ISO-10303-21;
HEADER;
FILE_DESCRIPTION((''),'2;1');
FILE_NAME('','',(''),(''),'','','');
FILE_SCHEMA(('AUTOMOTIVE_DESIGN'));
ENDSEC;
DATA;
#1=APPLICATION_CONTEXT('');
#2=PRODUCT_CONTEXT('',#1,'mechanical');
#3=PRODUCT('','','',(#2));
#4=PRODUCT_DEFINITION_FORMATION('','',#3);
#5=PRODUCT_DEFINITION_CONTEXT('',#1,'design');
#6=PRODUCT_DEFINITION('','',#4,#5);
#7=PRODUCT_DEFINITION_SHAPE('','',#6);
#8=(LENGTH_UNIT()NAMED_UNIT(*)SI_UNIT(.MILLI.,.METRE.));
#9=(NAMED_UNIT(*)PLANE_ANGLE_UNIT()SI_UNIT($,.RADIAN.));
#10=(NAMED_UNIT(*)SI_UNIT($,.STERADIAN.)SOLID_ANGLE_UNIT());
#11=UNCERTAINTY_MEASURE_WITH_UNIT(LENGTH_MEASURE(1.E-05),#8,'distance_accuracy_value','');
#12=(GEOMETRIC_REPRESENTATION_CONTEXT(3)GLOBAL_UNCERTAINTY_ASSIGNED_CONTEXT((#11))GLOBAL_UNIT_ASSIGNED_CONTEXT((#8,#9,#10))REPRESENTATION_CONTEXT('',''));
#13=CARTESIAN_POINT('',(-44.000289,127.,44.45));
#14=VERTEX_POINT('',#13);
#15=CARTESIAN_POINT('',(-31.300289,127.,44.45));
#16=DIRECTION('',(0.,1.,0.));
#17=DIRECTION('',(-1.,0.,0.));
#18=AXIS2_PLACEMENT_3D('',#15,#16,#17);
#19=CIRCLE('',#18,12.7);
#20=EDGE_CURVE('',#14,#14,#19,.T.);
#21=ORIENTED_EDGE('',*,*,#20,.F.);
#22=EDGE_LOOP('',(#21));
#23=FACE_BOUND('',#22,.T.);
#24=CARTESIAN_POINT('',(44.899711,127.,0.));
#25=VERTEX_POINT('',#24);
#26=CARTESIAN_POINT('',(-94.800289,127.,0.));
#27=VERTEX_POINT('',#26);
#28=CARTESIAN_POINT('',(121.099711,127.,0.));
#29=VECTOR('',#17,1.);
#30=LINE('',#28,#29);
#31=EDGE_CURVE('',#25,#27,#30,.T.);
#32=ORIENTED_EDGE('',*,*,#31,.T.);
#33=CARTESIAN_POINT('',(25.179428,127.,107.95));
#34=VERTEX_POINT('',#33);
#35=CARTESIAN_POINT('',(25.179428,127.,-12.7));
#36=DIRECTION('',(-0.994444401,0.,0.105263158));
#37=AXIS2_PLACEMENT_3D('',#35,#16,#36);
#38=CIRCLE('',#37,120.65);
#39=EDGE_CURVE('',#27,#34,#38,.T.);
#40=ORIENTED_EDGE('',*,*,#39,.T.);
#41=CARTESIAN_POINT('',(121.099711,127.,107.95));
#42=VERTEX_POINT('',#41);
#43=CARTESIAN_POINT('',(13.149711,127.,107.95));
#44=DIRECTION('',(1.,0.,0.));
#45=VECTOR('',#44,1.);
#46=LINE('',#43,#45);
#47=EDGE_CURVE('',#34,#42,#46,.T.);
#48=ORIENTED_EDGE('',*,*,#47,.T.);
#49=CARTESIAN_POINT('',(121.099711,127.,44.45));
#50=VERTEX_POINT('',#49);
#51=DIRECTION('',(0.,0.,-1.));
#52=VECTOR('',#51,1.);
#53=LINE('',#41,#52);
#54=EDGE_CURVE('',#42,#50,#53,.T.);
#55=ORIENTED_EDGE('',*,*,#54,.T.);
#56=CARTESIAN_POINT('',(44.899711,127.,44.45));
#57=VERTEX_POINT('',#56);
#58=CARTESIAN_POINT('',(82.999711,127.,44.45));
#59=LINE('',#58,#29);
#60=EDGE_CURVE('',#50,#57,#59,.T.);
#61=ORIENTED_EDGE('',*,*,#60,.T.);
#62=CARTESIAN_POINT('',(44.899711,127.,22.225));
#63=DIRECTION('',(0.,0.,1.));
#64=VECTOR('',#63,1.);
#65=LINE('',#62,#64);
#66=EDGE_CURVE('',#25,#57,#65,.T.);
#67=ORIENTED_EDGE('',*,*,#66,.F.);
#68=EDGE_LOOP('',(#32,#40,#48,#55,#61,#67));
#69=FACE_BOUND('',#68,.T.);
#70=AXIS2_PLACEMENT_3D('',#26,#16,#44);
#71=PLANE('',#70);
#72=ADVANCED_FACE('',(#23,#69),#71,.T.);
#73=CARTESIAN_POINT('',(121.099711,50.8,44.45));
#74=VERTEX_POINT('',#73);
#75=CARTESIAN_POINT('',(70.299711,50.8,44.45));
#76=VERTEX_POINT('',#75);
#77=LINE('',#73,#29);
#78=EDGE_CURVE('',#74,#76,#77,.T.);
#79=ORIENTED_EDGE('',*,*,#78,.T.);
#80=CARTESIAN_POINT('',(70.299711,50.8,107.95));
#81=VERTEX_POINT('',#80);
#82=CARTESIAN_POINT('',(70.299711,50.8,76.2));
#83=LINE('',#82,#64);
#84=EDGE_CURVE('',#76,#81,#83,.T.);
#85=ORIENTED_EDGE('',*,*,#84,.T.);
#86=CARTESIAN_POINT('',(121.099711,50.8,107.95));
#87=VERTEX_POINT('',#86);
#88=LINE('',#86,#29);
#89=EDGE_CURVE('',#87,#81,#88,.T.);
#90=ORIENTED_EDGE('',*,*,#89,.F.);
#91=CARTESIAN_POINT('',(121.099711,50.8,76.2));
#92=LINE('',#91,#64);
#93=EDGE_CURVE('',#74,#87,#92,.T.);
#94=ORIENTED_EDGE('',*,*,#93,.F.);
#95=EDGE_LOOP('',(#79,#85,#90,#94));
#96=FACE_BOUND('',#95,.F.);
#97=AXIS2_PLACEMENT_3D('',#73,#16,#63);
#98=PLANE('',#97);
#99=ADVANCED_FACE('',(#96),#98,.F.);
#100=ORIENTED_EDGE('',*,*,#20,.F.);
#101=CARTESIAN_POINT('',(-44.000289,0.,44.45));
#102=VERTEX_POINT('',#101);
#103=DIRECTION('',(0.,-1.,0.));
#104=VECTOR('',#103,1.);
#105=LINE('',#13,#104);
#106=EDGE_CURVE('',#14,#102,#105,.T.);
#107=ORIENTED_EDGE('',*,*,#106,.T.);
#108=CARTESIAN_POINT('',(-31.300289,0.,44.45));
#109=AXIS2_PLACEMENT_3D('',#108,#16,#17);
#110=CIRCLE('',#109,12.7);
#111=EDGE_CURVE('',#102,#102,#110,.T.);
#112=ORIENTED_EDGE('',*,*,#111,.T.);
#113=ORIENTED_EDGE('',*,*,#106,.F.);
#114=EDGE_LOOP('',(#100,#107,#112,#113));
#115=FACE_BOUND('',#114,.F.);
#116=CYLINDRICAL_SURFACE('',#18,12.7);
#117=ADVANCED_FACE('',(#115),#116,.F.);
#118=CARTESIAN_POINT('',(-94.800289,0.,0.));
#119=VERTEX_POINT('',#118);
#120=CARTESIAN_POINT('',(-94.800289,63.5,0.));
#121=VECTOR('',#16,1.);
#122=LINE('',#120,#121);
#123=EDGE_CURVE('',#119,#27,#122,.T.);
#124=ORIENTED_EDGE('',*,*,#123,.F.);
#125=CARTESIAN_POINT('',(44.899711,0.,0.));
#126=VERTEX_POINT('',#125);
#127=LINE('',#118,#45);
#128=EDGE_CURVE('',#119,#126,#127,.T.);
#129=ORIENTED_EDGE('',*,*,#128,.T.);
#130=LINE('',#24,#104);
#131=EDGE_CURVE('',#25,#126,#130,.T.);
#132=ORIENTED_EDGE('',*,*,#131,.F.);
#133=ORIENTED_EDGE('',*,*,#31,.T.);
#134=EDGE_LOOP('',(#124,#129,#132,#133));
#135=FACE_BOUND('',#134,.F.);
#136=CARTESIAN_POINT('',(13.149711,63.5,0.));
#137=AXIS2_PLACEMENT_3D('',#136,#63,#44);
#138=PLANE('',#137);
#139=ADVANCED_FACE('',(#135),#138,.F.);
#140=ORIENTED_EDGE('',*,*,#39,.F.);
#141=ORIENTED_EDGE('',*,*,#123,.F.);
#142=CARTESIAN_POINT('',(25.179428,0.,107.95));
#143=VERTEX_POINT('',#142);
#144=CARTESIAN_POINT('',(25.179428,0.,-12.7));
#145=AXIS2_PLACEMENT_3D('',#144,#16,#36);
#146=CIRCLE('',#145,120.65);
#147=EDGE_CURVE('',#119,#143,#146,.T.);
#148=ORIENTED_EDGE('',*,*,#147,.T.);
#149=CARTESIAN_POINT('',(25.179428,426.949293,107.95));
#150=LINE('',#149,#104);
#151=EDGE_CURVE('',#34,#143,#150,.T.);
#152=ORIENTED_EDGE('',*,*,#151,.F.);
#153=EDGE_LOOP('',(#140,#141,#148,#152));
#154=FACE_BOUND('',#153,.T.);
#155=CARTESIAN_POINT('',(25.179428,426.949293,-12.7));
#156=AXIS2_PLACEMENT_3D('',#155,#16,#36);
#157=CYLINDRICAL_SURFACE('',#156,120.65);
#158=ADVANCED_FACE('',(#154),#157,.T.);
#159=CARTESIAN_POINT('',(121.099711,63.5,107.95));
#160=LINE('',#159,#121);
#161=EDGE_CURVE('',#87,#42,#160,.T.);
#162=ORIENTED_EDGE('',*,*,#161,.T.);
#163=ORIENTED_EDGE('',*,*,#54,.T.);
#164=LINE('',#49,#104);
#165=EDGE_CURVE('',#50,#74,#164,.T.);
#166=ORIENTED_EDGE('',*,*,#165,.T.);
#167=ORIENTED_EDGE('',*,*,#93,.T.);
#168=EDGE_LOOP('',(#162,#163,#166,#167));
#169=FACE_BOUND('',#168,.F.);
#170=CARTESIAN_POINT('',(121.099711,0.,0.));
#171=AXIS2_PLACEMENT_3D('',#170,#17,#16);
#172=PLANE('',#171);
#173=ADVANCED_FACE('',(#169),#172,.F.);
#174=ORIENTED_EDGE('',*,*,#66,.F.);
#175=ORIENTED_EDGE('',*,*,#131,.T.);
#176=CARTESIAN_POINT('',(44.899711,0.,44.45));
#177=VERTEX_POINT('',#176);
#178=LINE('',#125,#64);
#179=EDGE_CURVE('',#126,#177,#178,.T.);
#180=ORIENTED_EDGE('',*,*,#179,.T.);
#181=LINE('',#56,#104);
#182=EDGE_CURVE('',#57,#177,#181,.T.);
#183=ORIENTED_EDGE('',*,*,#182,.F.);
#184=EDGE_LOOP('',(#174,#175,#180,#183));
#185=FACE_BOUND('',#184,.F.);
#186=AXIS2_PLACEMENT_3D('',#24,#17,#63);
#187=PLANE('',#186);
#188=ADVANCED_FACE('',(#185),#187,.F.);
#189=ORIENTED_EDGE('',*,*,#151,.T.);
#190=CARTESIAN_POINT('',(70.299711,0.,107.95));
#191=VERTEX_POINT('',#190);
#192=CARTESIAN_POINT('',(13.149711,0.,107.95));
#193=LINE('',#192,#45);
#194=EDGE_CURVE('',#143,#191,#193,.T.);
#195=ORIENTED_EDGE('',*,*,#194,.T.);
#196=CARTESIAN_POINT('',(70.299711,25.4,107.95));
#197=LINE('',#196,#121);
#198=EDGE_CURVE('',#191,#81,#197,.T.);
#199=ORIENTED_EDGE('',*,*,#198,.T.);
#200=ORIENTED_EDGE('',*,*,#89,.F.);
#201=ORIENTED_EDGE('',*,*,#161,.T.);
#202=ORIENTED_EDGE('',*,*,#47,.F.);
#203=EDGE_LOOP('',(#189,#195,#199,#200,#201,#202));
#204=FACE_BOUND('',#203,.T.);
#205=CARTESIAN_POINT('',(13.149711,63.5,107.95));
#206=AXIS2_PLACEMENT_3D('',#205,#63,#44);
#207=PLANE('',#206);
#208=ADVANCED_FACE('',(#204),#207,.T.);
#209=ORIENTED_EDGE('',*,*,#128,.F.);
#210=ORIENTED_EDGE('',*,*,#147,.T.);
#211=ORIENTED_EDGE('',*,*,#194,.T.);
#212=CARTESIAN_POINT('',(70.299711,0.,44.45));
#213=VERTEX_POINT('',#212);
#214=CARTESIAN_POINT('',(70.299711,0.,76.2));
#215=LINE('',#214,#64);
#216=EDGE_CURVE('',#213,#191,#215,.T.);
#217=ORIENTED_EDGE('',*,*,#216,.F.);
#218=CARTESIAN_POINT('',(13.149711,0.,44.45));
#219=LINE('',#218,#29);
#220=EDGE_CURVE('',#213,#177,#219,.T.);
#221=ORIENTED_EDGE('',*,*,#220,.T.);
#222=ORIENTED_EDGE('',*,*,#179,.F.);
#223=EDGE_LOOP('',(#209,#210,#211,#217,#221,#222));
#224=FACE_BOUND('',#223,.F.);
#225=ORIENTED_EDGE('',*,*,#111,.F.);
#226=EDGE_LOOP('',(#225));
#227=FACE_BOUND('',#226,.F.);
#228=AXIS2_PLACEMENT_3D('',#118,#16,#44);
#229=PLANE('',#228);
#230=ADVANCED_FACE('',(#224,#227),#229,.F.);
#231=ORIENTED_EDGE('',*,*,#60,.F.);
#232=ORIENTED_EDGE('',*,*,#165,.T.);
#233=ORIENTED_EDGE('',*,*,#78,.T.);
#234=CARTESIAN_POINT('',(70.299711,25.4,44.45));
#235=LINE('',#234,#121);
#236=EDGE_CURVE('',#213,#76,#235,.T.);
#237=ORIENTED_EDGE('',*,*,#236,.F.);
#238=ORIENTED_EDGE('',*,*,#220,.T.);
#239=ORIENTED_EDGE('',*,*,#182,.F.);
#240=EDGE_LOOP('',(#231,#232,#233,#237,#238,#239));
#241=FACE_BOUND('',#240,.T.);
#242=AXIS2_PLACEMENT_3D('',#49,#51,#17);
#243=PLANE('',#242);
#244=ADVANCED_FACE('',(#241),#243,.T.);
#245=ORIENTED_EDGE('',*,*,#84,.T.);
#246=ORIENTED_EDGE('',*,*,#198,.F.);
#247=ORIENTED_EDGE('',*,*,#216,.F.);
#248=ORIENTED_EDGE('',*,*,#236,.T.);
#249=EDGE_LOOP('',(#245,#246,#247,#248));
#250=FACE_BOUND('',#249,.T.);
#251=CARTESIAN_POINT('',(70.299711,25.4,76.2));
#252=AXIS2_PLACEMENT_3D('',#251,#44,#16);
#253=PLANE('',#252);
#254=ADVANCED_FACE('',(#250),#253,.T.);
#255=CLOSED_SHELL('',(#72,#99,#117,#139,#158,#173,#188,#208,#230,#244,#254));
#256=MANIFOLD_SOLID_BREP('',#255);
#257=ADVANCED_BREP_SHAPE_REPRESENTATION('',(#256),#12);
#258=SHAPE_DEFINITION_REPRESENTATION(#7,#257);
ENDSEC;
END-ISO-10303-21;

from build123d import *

# Parameters (mm, degrees)
F0_W         = 215.9
F0_H         = 127
F1_DEPTH     = 82.55
F2_W         = 76.2
F2_H         = 44.45
F3_DEPTH     = 127.001
F4_W         = 50.8
F4_H         = 37.5581905246
F5_DEPTH     = 82.551
F6_R         = 7.8160058593
F7_DEPTH     = 0.254
F8_R         = 12.7
F9_DEPTH     = 127.001
F10_T1_DEPTH = 699.3812649799
F11_DEPTH    = 107.95
F14_W        = 76.2
F14_H        = 44.45
F15_DEPTH    = 127.001
F13_W        = 50.8
F13_H        = 63.5
F16_DEPTH    = 50.8
F17_R        = 12.7
F18_DEPTH    = 127.001
F19_T1_DEPTH = 726.8985851792


# Not quite as in the source:
# - a fillet or chamfer that OpenCascade refuses, or shapes differently, is made with other operations: its cross-section is extruded or revolved along the edge and cut away or added


with BuildPart() as f1:
    # F0 (on Top) → F1 (new body)
    with BuildSketch(Plane.XY):
        with Locations((13.1497114167, 63.5)):
            Rectangle(F0_W, F0_H)
    extrude(amount=F1_DEPTH)

    # F2 (on face) → F3 (cut, through all)
    with BuildSketch(Plane(origin=(0, 127, 0), x_dir=(-1, 0, 0), z_dir=(0, 1, 0))):
        with Locations((-82.9997114167, 22.225)):
            Rectangle(F2_W, F2_H)
    extrude(amount=-F3_DEPTH, mode=Mode.SUBTRACT)

    # F4 (on face) → F5 (cut, through all)
    with BuildSketch(Plane.XY.offset(82.55)):
        with Locations((95.6997114167, 18.7790952623)):
            Rectangle(F4_W, F4_H)
    extrude(amount=-F5_DEPTH, mode=Mode.SUBTRACT)

    # F6 (on face) → F7 (cut)
    with BuildSketch(Plane.YZ.offset(121.0997114167)):
        with Locations((84.554515779, 63.2054284215)):
            Circle(F6_R)
    extrude(amount=-F7_DEPTH, mode=Mode.SUBTRACT)

    # F8 (on face) → F9 (cut, through all)
    with BuildSketch(Plane(origin=(0, 127, 0), x_dir=(-1, 0, 0), z_dir=(0, 1, 0))):
        with Locations((31.3002885833, 44.45)):
            Circle(F8_R)
    extrude(amount=-F9_DEPTH, mode=Mode.SUBTRACT)

    # F10: fillet of radius 120.65 on 1 edges, made by hand

    # F10_s2 → F10_t1 (cut)
    with BuildSketch(Plane.XZ.offset(-413.19063249)):
        with BuildLine():
            ThreePointArc((-94.8002885833, 0), (-50.8919372849, 59.7600722971), (19.6759644126, 82.55))
            Line((19.6759644126, 82.55), (19.6759644126, 84.963))
            Line((19.6759644126, 84.963), (-94.8002885833, 84.963))
            Line((-94.8002885833, 84.963), (-97.2132885833, 82.55))
            ThreePointArc((-97.2132885833, 82.55), (-97.2132885833, 41.275), (-97.0898136433, 0.762))
            Line((-97.0898136433, 0.762), (-94.8002885833, 0))
        make_face()
    extrude(amount=F10_T1_DEPTH, mode=Mode.SUBTRACT)

    # F0 (on Top) → F11 (join)
    with BuildSketch(Plane.XY):
        with Locations((13.1497114167, 63.5)):
            Rectangle(F0_W, F0_H)
    extrude(amount=F11_DEPTH)

    # F14 (on face) → F15 (cut, through all)
    with BuildSketch(Plane(origin=(0, 127, 0), x_dir=(-1, 0, 0), z_dir=(0, 1, 0))):
        with Locations((-82.9997114167, 22.225)):
            Rectangle(F14_W, F14_H)
    extrude(amount=-F15_DEPTH, mode=Mode.SUBTRACT)

    # F13 (on face) → F16 (cut)
    with BuildSketch(Plane.YZ.offset(121.0997114167)):
        with Locations((25.4, 76.2)):
            Rectangle(F13_W, F13_H)
    extrude(amount=-F16_DEPTH, mode=Mode.SUBTRACT)

    # F17 (on face) → F18 (cut, through all)
    with BuildSketch(Plane(origin=(0, 127, 0), x_dir=(-1, 0, 0), z_dir=(0, 1, 0))):
        with Locations((31.3002885833, 44.45)):
            Circle(F17_R)
    extrude(amount=-F18_DEPTH, mode=Mode.SUBTRACT)

    # F19: fillet of radius 120.65 on 1 edges, made by hand

    # F19_s2 → F19_t1 (cut)
    with BuildSketch(Plane.XZ.offset(-426.9492925896)):
        with BuildLine():
            ThreePointArc((-94.8002885833, 0), (-55.5180544698, 76.9902377631), (25.1794284525, 107.95))
            Line((25.1794284525, 107.95), (-94.8002885833, 107.95))
            Line((-94.8002885833, 107.95), (-94.8002885833, 0))
        make_face()
    extrude(amount=F19_T1_DEPTH, mode=Mode.SUBTRACT)


solid = f1.part
